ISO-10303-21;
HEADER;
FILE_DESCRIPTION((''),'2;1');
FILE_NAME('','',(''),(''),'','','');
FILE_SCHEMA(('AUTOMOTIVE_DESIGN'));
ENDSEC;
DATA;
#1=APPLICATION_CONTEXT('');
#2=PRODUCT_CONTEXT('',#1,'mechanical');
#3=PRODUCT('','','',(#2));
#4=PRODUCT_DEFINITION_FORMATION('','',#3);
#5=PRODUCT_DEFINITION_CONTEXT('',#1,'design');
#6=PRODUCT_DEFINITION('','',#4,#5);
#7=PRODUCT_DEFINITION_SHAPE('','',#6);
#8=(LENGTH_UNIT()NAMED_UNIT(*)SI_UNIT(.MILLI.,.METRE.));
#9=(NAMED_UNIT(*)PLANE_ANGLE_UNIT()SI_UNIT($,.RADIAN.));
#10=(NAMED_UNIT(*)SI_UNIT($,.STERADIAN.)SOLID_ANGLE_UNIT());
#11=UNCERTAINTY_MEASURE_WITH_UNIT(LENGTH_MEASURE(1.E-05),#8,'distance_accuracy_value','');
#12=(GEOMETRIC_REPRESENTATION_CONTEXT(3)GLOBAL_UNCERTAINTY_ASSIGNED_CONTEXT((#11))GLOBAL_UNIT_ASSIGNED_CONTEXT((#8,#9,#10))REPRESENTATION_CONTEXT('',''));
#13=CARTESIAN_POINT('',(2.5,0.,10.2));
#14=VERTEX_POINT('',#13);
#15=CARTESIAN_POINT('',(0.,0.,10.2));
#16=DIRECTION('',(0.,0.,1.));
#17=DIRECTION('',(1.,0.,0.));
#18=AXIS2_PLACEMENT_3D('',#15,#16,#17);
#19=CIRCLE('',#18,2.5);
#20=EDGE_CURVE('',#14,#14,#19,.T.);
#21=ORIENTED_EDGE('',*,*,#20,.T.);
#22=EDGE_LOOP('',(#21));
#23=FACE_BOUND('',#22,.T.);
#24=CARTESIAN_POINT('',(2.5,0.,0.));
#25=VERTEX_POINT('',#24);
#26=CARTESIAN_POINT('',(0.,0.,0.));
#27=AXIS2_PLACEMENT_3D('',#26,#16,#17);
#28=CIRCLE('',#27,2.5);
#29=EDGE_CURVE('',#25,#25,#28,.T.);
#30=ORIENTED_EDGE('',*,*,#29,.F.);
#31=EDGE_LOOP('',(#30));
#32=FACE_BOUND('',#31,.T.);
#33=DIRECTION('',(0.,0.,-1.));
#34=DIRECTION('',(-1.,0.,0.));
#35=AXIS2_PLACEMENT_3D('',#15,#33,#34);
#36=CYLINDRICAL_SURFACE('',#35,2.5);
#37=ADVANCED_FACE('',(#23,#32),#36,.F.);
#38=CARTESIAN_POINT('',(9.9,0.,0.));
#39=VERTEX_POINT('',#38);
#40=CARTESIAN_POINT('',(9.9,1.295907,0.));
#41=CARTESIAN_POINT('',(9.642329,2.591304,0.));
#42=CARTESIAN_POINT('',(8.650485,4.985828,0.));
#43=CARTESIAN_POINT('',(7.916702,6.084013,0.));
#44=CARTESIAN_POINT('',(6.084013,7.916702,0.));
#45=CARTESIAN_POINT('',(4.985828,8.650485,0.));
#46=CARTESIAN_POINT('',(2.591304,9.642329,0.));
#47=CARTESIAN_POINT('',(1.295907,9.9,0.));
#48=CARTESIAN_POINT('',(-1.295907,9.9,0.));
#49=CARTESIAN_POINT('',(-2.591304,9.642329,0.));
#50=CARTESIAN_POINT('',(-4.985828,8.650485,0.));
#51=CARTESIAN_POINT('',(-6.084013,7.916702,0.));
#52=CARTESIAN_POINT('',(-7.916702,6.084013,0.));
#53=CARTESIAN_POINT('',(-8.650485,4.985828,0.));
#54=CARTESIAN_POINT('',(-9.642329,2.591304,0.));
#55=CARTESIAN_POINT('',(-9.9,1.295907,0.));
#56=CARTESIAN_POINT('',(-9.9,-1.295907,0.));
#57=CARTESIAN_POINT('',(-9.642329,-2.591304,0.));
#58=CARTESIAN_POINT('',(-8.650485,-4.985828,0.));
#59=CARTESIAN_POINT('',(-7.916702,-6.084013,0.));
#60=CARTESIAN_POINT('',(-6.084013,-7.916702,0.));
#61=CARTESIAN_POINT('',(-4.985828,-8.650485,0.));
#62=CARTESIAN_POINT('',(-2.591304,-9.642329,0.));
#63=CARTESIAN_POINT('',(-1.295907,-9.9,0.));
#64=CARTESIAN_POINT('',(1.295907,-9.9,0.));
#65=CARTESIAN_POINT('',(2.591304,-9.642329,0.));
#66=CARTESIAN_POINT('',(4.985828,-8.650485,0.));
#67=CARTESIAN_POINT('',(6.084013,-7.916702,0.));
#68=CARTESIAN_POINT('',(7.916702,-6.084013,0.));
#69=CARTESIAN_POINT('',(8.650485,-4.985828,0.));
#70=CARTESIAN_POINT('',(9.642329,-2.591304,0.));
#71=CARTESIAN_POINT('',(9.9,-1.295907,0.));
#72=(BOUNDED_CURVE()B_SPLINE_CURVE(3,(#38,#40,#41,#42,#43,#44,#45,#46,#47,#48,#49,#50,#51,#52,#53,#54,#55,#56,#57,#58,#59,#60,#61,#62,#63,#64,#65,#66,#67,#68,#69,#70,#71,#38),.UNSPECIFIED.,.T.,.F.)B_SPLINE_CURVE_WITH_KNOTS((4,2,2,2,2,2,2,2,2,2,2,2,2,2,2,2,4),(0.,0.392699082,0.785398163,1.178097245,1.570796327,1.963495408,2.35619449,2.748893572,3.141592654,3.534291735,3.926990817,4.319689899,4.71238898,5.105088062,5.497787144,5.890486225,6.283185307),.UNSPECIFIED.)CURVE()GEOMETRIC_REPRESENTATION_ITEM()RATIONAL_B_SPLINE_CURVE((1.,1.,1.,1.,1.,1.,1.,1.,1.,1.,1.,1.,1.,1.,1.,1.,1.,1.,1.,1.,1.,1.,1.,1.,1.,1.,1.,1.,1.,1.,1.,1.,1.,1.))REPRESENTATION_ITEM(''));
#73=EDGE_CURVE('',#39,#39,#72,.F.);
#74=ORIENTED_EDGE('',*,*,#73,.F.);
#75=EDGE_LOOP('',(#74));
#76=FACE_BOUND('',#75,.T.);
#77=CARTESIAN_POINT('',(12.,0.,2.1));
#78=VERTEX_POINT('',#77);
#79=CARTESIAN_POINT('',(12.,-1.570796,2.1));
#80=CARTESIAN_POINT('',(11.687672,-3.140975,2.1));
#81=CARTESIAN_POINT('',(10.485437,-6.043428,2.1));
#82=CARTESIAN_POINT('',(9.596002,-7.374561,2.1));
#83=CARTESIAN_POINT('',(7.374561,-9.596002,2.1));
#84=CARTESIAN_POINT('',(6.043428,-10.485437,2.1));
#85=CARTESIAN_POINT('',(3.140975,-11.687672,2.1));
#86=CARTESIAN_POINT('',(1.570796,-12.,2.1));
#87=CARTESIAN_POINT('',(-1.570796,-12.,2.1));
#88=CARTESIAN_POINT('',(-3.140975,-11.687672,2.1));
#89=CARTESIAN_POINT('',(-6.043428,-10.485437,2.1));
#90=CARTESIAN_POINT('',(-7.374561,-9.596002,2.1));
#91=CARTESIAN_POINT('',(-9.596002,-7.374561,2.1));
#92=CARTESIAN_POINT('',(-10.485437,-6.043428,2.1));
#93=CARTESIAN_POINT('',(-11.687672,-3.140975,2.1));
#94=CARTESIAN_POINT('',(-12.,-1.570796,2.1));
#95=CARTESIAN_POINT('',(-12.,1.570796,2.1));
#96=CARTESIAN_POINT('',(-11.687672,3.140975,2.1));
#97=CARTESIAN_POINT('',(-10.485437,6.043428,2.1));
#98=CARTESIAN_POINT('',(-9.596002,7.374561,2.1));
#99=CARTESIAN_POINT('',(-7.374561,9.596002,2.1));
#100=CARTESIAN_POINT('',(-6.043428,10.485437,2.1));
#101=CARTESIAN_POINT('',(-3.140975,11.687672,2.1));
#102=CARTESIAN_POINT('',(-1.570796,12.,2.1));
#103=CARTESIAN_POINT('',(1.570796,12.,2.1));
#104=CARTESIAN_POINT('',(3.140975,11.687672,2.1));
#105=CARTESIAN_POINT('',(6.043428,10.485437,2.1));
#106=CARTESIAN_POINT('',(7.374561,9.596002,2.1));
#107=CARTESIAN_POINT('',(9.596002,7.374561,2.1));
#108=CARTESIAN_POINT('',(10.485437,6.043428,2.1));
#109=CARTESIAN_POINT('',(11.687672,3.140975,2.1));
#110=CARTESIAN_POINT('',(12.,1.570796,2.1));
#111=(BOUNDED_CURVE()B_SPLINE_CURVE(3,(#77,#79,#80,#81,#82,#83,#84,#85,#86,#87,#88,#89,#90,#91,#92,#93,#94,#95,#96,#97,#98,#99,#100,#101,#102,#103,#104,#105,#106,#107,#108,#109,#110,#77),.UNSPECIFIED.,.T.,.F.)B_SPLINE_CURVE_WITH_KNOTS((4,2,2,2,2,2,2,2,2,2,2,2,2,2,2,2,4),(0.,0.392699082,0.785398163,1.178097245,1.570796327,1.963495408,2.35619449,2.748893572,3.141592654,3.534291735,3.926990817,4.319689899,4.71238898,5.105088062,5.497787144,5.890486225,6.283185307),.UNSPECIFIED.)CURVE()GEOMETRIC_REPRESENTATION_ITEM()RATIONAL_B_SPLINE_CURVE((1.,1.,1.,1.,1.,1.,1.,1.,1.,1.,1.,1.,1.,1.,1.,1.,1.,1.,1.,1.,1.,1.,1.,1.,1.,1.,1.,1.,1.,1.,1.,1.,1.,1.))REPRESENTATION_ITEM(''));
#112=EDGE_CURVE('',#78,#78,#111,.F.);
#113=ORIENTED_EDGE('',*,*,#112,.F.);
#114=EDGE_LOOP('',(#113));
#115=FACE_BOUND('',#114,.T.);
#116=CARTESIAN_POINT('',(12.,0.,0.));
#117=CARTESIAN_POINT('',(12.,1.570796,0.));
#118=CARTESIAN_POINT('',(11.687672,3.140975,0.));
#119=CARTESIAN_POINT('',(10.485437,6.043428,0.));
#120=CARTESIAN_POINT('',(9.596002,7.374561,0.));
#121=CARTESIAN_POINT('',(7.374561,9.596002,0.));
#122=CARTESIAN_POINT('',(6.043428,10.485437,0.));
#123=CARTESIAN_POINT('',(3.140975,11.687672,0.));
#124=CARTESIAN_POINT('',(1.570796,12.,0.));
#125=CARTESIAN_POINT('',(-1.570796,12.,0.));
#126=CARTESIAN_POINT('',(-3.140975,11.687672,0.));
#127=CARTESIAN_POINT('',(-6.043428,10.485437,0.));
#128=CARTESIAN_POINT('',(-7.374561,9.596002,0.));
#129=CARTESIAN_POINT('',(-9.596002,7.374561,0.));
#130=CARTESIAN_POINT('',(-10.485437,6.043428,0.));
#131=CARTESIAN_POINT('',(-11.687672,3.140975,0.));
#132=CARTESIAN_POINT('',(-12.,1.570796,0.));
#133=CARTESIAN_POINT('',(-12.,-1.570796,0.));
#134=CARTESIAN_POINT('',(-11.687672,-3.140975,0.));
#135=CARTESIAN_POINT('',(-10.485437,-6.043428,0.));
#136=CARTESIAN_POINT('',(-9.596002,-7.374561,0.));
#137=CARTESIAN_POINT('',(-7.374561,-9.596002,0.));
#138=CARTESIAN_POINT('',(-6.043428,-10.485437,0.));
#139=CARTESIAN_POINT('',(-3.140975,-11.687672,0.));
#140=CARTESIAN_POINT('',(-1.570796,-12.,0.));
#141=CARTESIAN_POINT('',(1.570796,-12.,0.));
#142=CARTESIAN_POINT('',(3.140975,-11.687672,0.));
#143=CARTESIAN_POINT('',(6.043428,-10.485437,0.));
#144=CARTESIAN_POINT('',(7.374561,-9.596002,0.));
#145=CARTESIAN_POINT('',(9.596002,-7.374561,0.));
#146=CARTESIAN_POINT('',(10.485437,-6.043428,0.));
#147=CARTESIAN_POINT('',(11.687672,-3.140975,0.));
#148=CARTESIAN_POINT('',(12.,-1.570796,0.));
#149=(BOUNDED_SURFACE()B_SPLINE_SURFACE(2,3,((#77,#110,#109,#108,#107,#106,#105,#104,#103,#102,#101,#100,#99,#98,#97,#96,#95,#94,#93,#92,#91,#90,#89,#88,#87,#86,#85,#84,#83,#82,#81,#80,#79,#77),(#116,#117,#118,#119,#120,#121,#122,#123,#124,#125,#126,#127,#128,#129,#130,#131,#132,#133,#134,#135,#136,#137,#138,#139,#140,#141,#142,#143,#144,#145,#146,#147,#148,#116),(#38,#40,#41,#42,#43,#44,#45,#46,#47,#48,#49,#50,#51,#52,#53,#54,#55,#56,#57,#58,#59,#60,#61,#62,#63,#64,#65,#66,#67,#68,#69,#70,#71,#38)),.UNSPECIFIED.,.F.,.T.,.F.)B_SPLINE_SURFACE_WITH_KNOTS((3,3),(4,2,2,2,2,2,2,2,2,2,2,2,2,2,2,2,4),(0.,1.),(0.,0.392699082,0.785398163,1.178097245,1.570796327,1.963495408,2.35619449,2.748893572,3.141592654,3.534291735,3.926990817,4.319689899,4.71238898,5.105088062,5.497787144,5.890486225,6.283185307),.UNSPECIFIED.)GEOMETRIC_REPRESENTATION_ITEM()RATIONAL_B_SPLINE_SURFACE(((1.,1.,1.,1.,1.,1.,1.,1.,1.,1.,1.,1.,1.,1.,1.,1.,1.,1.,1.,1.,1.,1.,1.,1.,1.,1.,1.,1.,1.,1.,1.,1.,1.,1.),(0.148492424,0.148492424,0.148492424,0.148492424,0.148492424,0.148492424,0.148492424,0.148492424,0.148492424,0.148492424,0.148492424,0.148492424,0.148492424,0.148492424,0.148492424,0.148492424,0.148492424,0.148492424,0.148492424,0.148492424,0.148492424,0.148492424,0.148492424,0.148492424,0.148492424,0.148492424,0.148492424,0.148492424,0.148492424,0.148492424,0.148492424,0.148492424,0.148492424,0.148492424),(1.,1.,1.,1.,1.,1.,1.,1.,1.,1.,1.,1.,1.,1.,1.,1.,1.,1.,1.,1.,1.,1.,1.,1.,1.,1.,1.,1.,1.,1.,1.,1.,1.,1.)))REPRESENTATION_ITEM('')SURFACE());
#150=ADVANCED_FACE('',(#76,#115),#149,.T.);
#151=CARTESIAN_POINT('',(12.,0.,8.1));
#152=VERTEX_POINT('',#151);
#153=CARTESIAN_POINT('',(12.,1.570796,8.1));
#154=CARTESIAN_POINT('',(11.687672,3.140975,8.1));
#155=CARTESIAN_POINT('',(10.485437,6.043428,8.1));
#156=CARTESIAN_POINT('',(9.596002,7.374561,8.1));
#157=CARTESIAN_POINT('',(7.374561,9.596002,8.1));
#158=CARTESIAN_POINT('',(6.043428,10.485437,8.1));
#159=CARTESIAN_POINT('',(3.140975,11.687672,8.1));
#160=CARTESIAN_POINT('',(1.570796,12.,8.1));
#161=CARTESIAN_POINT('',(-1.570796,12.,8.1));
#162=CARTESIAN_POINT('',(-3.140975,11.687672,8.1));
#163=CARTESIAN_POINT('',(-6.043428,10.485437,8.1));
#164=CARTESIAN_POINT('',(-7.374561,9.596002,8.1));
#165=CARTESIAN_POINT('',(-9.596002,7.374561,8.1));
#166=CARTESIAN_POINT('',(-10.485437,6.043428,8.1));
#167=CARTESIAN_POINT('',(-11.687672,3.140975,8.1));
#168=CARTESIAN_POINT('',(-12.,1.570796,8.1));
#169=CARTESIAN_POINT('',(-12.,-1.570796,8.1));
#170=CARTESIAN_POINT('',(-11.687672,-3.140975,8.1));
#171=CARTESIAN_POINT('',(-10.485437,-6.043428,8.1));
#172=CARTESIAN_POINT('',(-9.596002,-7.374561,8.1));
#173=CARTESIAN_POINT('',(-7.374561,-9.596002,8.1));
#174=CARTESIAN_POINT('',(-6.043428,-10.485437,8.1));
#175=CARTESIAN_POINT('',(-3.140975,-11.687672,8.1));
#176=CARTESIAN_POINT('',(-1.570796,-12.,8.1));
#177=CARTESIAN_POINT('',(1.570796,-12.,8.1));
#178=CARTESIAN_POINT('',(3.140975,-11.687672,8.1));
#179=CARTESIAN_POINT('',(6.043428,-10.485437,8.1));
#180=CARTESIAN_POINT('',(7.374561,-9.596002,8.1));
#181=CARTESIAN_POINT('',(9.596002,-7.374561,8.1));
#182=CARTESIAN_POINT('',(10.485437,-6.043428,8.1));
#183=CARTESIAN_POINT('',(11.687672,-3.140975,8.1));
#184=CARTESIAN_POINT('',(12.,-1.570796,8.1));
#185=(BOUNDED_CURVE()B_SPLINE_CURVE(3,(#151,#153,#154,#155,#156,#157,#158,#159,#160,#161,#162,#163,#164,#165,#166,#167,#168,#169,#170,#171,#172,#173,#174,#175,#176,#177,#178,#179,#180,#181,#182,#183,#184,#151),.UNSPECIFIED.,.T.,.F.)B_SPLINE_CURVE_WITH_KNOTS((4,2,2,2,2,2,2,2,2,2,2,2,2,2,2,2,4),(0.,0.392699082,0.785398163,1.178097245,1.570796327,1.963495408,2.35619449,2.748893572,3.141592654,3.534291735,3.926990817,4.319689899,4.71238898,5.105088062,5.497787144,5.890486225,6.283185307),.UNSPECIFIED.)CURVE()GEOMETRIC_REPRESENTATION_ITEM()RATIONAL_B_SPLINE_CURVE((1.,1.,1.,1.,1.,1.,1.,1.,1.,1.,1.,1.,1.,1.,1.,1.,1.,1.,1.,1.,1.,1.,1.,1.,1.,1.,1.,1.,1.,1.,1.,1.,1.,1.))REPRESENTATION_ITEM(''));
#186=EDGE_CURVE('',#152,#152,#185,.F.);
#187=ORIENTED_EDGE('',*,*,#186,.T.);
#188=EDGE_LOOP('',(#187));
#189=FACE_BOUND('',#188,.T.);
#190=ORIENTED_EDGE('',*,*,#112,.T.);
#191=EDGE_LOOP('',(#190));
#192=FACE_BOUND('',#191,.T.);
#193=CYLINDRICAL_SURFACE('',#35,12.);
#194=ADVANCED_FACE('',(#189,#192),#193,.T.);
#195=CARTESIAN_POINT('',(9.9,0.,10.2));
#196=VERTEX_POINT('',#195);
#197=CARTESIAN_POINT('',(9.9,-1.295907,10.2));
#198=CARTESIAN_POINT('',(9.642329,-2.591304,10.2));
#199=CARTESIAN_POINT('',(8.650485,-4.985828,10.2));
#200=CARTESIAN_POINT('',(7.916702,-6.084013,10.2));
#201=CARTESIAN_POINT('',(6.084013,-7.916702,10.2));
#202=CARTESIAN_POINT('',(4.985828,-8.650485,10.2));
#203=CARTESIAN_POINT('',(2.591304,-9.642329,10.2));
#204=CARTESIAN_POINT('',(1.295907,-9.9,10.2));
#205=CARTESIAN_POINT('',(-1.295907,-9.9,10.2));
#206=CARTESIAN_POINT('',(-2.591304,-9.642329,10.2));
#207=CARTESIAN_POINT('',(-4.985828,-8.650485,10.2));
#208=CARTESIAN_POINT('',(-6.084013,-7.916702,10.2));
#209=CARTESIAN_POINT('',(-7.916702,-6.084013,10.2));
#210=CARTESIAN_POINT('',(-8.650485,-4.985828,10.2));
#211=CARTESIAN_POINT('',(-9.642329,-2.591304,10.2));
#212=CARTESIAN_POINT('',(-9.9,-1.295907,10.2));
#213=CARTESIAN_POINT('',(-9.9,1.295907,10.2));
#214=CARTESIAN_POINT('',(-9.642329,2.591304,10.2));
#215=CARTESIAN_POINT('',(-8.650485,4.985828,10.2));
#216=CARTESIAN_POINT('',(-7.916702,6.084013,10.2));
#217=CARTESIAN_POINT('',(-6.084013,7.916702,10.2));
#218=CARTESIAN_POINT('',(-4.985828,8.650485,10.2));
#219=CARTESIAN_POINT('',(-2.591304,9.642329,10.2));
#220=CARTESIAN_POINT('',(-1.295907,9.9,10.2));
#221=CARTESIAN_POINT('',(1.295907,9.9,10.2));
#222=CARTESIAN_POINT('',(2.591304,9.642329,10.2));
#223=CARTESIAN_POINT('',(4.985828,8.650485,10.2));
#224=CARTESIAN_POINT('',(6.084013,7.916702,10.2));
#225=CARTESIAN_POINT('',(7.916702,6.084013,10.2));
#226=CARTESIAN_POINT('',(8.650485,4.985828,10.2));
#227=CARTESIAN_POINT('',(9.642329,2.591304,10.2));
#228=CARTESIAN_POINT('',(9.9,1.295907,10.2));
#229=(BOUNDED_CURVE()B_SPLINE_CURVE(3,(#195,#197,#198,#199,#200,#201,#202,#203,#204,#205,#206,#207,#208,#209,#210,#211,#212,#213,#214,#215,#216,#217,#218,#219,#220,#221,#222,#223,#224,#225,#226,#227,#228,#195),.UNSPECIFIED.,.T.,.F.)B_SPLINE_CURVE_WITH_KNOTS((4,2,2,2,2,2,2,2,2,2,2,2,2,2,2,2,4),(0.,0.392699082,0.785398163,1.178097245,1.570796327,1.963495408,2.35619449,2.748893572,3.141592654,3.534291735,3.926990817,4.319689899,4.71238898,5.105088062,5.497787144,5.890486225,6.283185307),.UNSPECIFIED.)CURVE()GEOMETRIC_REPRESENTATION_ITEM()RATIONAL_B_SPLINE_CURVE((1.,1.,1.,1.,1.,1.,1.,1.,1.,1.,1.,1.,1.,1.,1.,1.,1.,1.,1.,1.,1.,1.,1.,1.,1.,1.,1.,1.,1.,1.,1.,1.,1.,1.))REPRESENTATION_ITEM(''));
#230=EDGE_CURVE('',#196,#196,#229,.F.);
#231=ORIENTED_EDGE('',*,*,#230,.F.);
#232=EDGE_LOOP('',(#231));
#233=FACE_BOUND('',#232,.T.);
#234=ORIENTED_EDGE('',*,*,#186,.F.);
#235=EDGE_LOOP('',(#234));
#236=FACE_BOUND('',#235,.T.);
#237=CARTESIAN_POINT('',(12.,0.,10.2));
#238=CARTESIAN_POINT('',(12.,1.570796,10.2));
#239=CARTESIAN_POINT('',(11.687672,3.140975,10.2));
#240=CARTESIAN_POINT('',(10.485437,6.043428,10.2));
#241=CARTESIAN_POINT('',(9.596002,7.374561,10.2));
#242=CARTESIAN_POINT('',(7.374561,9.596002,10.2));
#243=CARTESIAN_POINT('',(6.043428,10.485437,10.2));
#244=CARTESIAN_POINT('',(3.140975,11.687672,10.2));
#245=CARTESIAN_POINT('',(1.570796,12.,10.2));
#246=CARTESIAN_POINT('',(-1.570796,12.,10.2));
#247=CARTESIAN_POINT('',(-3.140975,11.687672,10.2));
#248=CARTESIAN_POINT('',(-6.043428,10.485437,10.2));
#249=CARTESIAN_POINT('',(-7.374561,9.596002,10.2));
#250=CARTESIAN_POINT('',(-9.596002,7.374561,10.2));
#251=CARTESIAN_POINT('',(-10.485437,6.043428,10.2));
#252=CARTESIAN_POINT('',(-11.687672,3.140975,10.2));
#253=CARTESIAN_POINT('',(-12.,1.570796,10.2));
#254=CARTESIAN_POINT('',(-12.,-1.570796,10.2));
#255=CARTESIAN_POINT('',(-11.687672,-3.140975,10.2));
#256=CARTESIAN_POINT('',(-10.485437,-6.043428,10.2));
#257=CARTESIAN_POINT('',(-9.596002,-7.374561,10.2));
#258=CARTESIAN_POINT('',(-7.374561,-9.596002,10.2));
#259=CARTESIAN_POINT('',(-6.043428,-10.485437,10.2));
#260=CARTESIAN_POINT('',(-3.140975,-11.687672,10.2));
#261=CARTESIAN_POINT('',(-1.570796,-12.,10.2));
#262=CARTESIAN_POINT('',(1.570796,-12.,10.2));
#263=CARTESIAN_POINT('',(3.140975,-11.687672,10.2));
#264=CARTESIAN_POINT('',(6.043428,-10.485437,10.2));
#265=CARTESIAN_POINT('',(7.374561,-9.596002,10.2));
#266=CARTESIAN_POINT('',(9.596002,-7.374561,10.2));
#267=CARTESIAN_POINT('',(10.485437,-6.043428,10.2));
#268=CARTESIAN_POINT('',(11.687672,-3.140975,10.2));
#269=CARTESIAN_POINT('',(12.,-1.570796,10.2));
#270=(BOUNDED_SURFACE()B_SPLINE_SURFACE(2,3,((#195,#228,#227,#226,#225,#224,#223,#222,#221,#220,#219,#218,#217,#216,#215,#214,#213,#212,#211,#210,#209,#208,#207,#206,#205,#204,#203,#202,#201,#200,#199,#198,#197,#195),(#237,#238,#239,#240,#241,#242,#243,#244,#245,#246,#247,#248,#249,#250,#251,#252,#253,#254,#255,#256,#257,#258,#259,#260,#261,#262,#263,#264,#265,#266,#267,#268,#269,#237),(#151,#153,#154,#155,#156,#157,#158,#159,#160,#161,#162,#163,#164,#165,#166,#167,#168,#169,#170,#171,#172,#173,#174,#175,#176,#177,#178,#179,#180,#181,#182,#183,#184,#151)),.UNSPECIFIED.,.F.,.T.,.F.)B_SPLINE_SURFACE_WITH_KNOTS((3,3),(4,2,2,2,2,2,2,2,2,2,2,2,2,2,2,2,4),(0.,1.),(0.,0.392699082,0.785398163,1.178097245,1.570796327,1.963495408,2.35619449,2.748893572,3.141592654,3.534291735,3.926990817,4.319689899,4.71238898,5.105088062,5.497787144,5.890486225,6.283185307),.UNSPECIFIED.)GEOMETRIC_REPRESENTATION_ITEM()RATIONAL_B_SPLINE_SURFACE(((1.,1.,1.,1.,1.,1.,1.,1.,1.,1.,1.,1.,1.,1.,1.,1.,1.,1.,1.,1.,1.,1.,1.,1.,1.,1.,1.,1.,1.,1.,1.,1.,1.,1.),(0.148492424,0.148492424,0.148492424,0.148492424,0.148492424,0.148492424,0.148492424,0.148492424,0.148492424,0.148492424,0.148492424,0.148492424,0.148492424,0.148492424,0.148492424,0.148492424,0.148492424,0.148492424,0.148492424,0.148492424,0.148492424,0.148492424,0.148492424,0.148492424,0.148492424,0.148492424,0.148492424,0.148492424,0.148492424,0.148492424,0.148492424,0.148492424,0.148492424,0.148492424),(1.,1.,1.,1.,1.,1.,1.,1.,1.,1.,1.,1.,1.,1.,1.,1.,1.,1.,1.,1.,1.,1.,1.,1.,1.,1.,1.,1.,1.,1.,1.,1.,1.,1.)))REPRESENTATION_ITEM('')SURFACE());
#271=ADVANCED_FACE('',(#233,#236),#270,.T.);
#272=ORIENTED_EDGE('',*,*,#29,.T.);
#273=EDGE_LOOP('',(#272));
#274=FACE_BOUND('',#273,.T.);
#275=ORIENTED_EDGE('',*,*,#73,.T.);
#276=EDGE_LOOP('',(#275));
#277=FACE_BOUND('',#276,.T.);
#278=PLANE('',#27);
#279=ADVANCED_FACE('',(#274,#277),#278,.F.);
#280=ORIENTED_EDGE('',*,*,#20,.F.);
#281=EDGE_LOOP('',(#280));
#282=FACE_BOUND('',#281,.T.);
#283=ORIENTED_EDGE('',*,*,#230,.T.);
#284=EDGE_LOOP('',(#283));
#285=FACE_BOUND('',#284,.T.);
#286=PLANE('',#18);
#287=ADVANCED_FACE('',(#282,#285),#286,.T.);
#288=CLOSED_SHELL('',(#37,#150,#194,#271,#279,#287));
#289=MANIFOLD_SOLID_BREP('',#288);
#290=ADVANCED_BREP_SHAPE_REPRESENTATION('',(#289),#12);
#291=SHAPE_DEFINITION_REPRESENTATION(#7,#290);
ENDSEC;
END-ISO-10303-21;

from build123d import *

# Parameters (mm, degrees)
SKETCH1_R           = 12
SKETCH1_R_2         = 2.5
BOSS_EXTRUDE1_DEPTH = 10.2
FILLET1_SIZE        = 2.1


with BuildPart() as part:
    # Sketch1 → Boss-Extrude1 (new body)
    with BuildSketch(Plane.XY):
        Circle(SKETCH1_R)
        Circle(SKETCH1_R_2, mode=Mode.SUBTRACT)
    extrude(amount=BOSS_EXTRUDE1_DEPTH)

    # Fillet1
    # a fillet whose section is not a circle: 2.1 mm, written as the material it takes off along each edge
    with BuildSketch(Plane(origin=(0, 0, 0), x_dir=(1, 0, 0), z_dir=(0, -1, 0))) as fillet1_piece_1:
        with BuildLine():
            Bezier((12, FILLET1_SIZE), (12, 0), (12 - FILLET1_SIZE, 0), weights=[1, 0.148492424, 1])
            Line((12 - FILLET1_SIZE, 0), (12, 0))
            Line((12, 0), (12, FILLET1_SIZE))
        make_face()
    revolve(axis=Axis((0, 0, 0), (0, 0, 1)), mode=Mode.SUBTRACT)
    with BuildSketch(Plane(origin=(0, 0, 10.2), x_dir=(1, 0, 0), z_dir=(0, -1, 0))) as fillet1_piece_2:
        with BuildLine():
            Bezier((12, -FILLET1_SIZE), (12, 0), (12 - FILLET1_SIZE, 0), weights=[1, 0.148492424, 1])
            Line((12 - FILLET1_SIZE, 0), (12, 0))
            Line((12, 0), (12, -FILLET1_SIZE))
        make_face()
    revolve(axis=Axis((0, 0, 10.2), (0, 0, 1)), mode=Mode.SUBTRACT)


solid = part.part
